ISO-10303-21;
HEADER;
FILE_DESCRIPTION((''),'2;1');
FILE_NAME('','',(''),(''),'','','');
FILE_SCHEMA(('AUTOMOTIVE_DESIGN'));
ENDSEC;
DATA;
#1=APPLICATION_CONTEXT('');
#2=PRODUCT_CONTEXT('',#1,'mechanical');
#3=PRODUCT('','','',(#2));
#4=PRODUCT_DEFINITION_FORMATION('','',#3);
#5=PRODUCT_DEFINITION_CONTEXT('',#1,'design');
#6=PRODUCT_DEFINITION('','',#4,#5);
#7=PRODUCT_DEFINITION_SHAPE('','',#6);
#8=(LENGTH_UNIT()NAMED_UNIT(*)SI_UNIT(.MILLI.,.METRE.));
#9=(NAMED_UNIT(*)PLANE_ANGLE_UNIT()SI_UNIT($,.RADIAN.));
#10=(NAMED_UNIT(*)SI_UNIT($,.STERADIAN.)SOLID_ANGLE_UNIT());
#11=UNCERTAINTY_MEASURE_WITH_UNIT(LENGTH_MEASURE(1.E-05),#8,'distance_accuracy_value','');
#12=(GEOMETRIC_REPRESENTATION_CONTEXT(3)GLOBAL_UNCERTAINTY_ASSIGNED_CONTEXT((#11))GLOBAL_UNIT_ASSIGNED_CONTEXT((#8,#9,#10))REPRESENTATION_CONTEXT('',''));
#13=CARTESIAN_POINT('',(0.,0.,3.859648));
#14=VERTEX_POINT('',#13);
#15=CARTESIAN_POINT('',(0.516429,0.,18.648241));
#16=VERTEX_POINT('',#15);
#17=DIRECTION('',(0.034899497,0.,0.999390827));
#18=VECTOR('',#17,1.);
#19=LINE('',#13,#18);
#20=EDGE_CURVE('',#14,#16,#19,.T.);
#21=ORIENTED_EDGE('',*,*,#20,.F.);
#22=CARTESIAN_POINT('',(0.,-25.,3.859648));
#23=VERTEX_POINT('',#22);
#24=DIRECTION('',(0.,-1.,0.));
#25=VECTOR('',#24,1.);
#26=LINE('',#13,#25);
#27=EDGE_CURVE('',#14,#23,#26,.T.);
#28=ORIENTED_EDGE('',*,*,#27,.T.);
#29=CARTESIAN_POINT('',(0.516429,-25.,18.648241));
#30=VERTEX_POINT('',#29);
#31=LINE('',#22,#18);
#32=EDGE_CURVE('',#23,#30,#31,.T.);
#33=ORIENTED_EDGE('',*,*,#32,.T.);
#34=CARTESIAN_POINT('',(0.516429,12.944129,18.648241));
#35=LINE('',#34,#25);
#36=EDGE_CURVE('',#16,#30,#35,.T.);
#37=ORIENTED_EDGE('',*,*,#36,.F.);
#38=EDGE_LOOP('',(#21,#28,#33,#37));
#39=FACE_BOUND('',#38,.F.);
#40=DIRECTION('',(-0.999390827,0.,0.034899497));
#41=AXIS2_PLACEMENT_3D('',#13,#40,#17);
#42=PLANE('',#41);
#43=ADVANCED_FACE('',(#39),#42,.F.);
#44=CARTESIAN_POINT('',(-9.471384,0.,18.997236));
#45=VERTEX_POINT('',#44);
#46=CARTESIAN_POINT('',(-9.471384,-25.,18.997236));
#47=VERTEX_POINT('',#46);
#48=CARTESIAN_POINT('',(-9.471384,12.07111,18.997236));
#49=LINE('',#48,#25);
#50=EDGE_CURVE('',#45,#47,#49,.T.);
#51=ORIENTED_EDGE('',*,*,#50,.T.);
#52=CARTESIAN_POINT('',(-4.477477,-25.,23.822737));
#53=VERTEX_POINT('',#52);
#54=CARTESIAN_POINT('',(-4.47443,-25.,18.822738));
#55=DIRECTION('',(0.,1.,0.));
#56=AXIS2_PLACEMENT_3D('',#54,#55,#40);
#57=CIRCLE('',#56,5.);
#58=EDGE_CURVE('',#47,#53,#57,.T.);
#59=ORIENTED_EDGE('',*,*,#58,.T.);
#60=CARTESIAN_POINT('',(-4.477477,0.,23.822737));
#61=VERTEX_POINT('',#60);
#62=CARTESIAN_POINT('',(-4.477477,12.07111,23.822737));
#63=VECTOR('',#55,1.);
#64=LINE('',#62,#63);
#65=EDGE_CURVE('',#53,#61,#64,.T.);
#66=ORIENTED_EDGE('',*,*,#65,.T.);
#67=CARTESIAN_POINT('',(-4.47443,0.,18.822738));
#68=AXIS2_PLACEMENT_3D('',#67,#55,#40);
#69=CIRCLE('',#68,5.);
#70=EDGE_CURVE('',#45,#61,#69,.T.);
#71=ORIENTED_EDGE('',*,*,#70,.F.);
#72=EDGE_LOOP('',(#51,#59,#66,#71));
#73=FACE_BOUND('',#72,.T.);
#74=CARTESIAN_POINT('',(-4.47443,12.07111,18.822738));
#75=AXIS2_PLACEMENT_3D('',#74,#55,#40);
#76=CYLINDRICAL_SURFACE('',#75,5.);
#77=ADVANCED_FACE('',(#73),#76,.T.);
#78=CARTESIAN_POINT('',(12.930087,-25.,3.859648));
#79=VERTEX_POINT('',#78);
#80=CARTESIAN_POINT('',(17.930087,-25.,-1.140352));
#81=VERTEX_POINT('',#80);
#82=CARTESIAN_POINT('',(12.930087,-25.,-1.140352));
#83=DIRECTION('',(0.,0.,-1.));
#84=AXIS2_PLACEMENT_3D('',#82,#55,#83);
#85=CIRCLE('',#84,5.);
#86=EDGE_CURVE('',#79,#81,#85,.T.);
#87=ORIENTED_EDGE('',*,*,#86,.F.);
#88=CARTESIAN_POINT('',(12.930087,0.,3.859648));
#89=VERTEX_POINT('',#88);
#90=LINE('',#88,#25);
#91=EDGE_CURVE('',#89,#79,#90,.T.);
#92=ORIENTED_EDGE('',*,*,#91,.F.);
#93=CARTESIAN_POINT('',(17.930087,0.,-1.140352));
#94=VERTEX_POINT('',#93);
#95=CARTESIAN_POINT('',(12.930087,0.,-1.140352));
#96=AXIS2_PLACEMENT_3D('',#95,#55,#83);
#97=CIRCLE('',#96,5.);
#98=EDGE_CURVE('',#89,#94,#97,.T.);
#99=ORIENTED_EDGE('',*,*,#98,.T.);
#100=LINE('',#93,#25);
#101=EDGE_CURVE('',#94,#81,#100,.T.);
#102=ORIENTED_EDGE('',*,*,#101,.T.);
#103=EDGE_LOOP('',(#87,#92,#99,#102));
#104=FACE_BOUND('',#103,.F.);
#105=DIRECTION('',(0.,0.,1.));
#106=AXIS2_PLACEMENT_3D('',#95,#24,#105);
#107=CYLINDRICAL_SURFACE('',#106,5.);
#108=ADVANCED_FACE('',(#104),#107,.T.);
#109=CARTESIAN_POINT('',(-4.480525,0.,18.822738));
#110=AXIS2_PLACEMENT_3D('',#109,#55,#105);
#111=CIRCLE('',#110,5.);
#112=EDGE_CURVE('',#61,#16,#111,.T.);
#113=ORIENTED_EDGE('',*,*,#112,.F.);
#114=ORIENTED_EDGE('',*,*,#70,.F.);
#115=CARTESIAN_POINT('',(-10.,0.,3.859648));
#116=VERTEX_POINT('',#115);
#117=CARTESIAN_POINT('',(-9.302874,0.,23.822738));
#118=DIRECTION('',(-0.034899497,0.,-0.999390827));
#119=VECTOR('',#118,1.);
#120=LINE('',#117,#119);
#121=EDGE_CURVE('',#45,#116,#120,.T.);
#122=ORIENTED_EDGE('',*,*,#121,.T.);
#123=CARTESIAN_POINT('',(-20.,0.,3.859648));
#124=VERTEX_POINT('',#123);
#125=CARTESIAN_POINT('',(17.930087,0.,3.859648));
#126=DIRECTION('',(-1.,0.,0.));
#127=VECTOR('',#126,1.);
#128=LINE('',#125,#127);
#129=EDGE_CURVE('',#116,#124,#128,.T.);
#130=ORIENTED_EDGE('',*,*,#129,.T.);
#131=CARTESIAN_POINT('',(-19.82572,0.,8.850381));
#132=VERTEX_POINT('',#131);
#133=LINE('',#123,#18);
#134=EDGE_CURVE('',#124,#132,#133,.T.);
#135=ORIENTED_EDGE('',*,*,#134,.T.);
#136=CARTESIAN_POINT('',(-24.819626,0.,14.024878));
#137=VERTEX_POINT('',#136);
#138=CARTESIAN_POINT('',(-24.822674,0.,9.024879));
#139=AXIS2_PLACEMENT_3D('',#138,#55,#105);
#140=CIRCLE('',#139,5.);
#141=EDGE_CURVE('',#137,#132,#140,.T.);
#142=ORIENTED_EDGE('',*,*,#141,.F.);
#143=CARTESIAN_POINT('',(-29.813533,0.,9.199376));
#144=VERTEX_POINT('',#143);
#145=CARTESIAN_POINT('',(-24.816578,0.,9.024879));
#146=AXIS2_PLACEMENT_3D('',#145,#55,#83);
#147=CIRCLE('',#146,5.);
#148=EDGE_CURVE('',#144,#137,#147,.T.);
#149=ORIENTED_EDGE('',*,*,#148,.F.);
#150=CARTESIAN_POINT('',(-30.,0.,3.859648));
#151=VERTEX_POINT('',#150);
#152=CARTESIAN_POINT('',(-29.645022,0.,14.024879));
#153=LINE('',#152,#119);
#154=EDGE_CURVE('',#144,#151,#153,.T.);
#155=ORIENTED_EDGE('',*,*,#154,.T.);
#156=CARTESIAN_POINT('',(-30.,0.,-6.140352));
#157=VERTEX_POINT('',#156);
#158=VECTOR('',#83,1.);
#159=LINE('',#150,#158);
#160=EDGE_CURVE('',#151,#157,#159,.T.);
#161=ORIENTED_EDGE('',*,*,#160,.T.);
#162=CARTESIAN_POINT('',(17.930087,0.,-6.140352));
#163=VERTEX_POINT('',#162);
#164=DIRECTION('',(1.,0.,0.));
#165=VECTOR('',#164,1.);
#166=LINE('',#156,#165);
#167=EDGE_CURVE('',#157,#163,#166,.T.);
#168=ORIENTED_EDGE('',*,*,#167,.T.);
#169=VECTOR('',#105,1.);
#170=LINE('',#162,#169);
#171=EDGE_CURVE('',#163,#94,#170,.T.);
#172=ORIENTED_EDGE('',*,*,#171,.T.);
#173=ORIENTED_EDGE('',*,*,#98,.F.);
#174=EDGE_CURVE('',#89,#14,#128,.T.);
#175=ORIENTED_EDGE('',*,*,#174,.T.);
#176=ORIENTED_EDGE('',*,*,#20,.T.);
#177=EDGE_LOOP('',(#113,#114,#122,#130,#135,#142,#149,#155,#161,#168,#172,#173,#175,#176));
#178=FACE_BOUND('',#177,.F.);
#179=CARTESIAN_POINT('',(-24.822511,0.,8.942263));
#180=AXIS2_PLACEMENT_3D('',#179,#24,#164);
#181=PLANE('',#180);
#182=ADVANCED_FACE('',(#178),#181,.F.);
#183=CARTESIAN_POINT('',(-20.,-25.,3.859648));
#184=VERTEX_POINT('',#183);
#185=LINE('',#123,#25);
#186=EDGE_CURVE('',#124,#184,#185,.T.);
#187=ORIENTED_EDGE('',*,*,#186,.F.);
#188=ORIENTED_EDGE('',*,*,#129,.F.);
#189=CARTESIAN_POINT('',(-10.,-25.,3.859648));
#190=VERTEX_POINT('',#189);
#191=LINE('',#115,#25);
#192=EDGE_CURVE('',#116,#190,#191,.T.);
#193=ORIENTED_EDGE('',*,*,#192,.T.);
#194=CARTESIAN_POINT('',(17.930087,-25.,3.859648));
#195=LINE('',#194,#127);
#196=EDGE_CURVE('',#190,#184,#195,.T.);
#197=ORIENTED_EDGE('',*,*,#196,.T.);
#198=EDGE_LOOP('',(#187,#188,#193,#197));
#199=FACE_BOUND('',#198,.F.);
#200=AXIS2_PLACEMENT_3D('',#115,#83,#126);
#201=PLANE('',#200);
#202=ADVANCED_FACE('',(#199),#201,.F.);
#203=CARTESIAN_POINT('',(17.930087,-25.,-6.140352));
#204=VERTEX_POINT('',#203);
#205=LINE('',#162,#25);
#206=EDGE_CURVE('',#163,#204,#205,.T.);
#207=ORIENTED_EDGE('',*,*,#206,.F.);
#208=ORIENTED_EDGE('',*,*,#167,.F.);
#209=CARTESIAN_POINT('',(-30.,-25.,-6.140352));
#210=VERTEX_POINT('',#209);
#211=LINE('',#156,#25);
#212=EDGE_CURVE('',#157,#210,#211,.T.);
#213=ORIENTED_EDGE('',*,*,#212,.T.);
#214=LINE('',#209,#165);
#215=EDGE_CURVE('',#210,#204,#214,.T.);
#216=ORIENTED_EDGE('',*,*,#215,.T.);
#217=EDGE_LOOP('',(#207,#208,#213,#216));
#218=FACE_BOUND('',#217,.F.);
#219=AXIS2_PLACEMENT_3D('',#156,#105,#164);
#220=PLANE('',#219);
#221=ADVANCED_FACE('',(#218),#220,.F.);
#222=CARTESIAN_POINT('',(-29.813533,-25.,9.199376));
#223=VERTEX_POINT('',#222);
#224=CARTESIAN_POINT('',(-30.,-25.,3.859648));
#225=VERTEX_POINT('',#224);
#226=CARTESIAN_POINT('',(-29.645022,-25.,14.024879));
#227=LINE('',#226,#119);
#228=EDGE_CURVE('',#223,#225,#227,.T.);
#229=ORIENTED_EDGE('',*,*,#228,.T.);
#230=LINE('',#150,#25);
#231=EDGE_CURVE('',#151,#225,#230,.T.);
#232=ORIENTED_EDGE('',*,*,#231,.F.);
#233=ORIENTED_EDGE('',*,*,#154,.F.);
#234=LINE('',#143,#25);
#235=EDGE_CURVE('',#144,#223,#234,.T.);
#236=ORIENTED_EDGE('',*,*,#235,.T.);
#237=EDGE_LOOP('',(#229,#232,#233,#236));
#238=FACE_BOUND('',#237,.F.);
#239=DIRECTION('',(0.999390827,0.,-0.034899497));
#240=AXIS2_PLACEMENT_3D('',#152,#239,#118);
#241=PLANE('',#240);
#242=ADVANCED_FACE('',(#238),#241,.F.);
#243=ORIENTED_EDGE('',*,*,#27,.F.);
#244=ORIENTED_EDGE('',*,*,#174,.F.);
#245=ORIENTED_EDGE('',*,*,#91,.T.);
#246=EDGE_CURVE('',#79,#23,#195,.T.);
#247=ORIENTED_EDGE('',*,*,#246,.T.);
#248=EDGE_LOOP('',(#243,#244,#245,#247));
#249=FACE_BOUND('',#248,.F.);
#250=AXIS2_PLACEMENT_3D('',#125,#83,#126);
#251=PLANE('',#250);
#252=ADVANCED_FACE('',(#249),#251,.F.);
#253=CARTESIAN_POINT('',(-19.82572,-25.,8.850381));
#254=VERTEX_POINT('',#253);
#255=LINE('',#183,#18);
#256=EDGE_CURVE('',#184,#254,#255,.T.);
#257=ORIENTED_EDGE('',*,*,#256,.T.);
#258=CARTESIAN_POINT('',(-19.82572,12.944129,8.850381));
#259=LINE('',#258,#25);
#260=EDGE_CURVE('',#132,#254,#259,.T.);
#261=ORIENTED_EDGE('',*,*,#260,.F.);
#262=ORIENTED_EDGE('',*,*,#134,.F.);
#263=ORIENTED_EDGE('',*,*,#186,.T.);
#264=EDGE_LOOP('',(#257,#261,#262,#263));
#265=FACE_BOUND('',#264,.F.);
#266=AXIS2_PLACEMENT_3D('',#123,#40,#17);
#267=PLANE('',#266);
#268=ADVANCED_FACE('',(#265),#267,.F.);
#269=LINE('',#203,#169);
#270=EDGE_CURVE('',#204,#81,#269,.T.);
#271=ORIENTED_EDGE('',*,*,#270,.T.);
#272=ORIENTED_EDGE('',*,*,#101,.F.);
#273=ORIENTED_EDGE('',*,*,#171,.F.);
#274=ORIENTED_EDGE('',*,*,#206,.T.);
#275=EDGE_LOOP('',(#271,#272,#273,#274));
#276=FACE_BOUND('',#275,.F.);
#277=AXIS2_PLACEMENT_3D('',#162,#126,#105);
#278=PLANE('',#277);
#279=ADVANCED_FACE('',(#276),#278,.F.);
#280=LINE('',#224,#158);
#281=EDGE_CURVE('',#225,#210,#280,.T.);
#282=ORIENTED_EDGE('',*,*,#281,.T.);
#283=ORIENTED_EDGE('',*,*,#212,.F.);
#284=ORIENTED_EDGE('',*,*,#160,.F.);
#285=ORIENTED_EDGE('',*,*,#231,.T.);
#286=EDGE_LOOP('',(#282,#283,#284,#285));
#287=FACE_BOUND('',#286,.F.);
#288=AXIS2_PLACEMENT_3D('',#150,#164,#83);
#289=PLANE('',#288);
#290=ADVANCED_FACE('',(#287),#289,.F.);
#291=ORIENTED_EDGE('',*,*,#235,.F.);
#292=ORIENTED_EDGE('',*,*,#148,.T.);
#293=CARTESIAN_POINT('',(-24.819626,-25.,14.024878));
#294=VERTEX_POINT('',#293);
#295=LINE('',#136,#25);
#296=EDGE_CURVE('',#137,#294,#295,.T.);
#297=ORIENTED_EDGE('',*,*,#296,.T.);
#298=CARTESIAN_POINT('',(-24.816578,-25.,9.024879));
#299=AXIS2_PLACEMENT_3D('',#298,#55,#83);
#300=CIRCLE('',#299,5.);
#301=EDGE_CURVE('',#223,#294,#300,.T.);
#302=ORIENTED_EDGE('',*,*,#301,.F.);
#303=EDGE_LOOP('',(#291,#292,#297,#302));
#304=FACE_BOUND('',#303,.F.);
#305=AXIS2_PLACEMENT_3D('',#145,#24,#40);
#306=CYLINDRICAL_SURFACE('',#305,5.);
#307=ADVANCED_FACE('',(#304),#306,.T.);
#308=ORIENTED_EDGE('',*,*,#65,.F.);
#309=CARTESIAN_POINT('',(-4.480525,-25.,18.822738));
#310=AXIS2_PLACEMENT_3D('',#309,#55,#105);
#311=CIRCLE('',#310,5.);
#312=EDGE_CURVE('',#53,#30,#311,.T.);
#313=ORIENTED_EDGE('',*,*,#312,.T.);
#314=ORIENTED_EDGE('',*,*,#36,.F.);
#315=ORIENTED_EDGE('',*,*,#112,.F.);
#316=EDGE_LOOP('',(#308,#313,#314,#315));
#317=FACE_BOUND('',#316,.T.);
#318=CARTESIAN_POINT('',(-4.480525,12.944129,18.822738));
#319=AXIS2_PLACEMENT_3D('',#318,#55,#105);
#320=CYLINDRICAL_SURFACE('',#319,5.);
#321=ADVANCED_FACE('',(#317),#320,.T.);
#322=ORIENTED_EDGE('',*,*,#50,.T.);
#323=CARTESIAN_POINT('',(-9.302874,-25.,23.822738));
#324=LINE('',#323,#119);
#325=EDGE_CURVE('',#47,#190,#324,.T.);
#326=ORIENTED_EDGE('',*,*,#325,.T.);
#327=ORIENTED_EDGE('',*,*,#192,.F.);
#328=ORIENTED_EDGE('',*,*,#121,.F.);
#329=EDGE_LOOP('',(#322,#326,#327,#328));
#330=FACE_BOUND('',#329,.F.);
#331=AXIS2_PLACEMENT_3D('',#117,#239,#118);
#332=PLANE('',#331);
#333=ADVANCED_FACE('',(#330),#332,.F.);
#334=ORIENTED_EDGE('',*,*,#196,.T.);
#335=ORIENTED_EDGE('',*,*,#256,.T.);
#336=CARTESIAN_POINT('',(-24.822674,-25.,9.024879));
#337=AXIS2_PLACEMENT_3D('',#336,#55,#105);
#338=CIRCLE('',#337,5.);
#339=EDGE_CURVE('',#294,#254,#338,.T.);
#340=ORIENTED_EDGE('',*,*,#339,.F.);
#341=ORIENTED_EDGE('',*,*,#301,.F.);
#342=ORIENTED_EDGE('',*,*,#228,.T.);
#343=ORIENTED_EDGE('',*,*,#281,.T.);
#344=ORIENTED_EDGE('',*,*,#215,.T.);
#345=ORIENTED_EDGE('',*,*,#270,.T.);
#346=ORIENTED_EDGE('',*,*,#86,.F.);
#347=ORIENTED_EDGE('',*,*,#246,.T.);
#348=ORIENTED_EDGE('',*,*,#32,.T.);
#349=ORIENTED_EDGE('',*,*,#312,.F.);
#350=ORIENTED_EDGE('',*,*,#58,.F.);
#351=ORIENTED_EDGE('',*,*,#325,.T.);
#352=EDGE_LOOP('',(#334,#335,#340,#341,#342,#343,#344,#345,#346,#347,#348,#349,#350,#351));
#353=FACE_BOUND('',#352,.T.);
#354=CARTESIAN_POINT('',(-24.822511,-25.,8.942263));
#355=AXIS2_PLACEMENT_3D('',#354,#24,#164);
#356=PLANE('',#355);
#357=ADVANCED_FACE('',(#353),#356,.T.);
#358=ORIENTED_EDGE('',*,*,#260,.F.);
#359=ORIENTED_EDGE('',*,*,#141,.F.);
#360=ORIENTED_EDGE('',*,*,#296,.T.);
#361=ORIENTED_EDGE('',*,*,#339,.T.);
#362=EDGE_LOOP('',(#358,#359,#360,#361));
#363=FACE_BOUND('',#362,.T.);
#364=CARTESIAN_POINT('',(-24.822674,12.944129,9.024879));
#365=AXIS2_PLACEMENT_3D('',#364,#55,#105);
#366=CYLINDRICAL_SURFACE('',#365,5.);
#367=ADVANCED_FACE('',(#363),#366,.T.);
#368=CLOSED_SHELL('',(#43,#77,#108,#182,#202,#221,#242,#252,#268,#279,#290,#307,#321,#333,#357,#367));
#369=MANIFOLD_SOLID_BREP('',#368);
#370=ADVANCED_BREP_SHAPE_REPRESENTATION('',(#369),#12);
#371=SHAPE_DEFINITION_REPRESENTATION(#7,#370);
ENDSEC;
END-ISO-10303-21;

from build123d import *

# Parameters (mm, degrees)
F1_DEPTH    = 25
F2_R        = 5
F3_T1_DEPTH = 50.8882578448
F3_T3_DEPTH = 49.1422193702
F4_T1_DEPTH = 50.8882578448
F5_R        = 5


# Not quite as in the source:
# - a fillet or chamfer that OpenCascade refuses, or shapes differently, is made with other operations: its cross-section is extruded or revolved along the edge and cut away or added


with BuildPart() as f1:
    # F0 (on Front) → F1 (new body)
    with BuildSketch(Plane.XZ):
        Polygon((-29.6450223361, 14.0248785508), (-30, 3.8596482585), (-20, 3.8596482585), (-19.6450223361, 14.0248785508), align=None)
        Polygon((-20, 3.8596482585), (-30, 3.8596482585), (-30, -6.1403517415), (17.9300867021, -6.1403517415), (17.9300867021, 3.8596482585), (0, 3.8596482585), (-10, 3.8596482585), align=None)
        Polygon((-9.3028735371, 23.8227382193), (-10, 3.8596482585), (0, 3.8596482585), (0.6971264629, 23.8227382193), align=None)
    extrude(amount=F1_DEPTH)

    # F2
    f2_edges = [f1.edges().sort_by_distance(p)[0] for p in [
        (-29.645022, -12.5, 14.024879),
    ]]
    fillet(f2_edges, radius=F2_R)

    # F3: fillet of radius 5 on 2 edges, made by hand

    # F3_s2 → F3_t1 (cut)
    with BuildSketch(Plane.XZ.offset(-12.9441289224)):
        with BuildLine():
            ThreePointArc((-24.8226739051, 14.0248785508), (-21.2259749034, 12.4981704031), (-19.82571977, 8.8503810672))
            Line((-19.82571977, 8.8503810672), (-19.6450223361, 14.0248785508))
            Line((-19.6450223361, 14.0248785508), (-24.8226739051, 14.0248785508))
        make_face()
    extrude(amount=F3_T1_DEPTH, mode=Mode.SUBTRACT)

    # F3_s4 → F3_t3 (cut)
    with BuildSketch(Plane.XZ.offset(-12.0711096851)):
        with BuildLine():
            ThreePointArc((-9.4713837982, 18.9972357029), (-7.9477215154, 22.419437221), (-4.4744296631, 23.8227382193))
            Line((-4.4744296631, 23.8227382193), (-9.3028735371, 23.8227382193))
            Line((-9.3028735371, 23.8227382193), (-9.4713837982, 18.9972357029))
        make_face()
    extrude(amount=F3_T3_DEPTH, mode=Mode.SUBTRACT)

    # F4: fillet of radius 5 on 1 edges, made by hand

    # F4_s2 → F4_t1 (cut)
    with BuildSketch(Plane.XZ.offset(-12.9441289224)):
        with BuildLine():
            ThreePointArc((-4.4805251061, 23.8227382193), (-0.8838261044, 22.2960300716), (0.516429029, 18.6482407358))
            Line((0.516429029, 18.6482407358), (0.6971264629, 23.8227382193))
            Line((0.6971264629, 23.8227382193), (-4.4805251061, 23.8227382193))
        make_face()
    extrude(amount=F4_T1_DEPTH, mode=Mode.SUBTRACT)

    # F5
    f5_edges = [f1.edges().sort_by_distance(p)[0] for p in [
        (17.930087, -12.5, 3.859648),
    ]]
    fillet(f5_edges, radius=F5_R)


solid = f1.part
